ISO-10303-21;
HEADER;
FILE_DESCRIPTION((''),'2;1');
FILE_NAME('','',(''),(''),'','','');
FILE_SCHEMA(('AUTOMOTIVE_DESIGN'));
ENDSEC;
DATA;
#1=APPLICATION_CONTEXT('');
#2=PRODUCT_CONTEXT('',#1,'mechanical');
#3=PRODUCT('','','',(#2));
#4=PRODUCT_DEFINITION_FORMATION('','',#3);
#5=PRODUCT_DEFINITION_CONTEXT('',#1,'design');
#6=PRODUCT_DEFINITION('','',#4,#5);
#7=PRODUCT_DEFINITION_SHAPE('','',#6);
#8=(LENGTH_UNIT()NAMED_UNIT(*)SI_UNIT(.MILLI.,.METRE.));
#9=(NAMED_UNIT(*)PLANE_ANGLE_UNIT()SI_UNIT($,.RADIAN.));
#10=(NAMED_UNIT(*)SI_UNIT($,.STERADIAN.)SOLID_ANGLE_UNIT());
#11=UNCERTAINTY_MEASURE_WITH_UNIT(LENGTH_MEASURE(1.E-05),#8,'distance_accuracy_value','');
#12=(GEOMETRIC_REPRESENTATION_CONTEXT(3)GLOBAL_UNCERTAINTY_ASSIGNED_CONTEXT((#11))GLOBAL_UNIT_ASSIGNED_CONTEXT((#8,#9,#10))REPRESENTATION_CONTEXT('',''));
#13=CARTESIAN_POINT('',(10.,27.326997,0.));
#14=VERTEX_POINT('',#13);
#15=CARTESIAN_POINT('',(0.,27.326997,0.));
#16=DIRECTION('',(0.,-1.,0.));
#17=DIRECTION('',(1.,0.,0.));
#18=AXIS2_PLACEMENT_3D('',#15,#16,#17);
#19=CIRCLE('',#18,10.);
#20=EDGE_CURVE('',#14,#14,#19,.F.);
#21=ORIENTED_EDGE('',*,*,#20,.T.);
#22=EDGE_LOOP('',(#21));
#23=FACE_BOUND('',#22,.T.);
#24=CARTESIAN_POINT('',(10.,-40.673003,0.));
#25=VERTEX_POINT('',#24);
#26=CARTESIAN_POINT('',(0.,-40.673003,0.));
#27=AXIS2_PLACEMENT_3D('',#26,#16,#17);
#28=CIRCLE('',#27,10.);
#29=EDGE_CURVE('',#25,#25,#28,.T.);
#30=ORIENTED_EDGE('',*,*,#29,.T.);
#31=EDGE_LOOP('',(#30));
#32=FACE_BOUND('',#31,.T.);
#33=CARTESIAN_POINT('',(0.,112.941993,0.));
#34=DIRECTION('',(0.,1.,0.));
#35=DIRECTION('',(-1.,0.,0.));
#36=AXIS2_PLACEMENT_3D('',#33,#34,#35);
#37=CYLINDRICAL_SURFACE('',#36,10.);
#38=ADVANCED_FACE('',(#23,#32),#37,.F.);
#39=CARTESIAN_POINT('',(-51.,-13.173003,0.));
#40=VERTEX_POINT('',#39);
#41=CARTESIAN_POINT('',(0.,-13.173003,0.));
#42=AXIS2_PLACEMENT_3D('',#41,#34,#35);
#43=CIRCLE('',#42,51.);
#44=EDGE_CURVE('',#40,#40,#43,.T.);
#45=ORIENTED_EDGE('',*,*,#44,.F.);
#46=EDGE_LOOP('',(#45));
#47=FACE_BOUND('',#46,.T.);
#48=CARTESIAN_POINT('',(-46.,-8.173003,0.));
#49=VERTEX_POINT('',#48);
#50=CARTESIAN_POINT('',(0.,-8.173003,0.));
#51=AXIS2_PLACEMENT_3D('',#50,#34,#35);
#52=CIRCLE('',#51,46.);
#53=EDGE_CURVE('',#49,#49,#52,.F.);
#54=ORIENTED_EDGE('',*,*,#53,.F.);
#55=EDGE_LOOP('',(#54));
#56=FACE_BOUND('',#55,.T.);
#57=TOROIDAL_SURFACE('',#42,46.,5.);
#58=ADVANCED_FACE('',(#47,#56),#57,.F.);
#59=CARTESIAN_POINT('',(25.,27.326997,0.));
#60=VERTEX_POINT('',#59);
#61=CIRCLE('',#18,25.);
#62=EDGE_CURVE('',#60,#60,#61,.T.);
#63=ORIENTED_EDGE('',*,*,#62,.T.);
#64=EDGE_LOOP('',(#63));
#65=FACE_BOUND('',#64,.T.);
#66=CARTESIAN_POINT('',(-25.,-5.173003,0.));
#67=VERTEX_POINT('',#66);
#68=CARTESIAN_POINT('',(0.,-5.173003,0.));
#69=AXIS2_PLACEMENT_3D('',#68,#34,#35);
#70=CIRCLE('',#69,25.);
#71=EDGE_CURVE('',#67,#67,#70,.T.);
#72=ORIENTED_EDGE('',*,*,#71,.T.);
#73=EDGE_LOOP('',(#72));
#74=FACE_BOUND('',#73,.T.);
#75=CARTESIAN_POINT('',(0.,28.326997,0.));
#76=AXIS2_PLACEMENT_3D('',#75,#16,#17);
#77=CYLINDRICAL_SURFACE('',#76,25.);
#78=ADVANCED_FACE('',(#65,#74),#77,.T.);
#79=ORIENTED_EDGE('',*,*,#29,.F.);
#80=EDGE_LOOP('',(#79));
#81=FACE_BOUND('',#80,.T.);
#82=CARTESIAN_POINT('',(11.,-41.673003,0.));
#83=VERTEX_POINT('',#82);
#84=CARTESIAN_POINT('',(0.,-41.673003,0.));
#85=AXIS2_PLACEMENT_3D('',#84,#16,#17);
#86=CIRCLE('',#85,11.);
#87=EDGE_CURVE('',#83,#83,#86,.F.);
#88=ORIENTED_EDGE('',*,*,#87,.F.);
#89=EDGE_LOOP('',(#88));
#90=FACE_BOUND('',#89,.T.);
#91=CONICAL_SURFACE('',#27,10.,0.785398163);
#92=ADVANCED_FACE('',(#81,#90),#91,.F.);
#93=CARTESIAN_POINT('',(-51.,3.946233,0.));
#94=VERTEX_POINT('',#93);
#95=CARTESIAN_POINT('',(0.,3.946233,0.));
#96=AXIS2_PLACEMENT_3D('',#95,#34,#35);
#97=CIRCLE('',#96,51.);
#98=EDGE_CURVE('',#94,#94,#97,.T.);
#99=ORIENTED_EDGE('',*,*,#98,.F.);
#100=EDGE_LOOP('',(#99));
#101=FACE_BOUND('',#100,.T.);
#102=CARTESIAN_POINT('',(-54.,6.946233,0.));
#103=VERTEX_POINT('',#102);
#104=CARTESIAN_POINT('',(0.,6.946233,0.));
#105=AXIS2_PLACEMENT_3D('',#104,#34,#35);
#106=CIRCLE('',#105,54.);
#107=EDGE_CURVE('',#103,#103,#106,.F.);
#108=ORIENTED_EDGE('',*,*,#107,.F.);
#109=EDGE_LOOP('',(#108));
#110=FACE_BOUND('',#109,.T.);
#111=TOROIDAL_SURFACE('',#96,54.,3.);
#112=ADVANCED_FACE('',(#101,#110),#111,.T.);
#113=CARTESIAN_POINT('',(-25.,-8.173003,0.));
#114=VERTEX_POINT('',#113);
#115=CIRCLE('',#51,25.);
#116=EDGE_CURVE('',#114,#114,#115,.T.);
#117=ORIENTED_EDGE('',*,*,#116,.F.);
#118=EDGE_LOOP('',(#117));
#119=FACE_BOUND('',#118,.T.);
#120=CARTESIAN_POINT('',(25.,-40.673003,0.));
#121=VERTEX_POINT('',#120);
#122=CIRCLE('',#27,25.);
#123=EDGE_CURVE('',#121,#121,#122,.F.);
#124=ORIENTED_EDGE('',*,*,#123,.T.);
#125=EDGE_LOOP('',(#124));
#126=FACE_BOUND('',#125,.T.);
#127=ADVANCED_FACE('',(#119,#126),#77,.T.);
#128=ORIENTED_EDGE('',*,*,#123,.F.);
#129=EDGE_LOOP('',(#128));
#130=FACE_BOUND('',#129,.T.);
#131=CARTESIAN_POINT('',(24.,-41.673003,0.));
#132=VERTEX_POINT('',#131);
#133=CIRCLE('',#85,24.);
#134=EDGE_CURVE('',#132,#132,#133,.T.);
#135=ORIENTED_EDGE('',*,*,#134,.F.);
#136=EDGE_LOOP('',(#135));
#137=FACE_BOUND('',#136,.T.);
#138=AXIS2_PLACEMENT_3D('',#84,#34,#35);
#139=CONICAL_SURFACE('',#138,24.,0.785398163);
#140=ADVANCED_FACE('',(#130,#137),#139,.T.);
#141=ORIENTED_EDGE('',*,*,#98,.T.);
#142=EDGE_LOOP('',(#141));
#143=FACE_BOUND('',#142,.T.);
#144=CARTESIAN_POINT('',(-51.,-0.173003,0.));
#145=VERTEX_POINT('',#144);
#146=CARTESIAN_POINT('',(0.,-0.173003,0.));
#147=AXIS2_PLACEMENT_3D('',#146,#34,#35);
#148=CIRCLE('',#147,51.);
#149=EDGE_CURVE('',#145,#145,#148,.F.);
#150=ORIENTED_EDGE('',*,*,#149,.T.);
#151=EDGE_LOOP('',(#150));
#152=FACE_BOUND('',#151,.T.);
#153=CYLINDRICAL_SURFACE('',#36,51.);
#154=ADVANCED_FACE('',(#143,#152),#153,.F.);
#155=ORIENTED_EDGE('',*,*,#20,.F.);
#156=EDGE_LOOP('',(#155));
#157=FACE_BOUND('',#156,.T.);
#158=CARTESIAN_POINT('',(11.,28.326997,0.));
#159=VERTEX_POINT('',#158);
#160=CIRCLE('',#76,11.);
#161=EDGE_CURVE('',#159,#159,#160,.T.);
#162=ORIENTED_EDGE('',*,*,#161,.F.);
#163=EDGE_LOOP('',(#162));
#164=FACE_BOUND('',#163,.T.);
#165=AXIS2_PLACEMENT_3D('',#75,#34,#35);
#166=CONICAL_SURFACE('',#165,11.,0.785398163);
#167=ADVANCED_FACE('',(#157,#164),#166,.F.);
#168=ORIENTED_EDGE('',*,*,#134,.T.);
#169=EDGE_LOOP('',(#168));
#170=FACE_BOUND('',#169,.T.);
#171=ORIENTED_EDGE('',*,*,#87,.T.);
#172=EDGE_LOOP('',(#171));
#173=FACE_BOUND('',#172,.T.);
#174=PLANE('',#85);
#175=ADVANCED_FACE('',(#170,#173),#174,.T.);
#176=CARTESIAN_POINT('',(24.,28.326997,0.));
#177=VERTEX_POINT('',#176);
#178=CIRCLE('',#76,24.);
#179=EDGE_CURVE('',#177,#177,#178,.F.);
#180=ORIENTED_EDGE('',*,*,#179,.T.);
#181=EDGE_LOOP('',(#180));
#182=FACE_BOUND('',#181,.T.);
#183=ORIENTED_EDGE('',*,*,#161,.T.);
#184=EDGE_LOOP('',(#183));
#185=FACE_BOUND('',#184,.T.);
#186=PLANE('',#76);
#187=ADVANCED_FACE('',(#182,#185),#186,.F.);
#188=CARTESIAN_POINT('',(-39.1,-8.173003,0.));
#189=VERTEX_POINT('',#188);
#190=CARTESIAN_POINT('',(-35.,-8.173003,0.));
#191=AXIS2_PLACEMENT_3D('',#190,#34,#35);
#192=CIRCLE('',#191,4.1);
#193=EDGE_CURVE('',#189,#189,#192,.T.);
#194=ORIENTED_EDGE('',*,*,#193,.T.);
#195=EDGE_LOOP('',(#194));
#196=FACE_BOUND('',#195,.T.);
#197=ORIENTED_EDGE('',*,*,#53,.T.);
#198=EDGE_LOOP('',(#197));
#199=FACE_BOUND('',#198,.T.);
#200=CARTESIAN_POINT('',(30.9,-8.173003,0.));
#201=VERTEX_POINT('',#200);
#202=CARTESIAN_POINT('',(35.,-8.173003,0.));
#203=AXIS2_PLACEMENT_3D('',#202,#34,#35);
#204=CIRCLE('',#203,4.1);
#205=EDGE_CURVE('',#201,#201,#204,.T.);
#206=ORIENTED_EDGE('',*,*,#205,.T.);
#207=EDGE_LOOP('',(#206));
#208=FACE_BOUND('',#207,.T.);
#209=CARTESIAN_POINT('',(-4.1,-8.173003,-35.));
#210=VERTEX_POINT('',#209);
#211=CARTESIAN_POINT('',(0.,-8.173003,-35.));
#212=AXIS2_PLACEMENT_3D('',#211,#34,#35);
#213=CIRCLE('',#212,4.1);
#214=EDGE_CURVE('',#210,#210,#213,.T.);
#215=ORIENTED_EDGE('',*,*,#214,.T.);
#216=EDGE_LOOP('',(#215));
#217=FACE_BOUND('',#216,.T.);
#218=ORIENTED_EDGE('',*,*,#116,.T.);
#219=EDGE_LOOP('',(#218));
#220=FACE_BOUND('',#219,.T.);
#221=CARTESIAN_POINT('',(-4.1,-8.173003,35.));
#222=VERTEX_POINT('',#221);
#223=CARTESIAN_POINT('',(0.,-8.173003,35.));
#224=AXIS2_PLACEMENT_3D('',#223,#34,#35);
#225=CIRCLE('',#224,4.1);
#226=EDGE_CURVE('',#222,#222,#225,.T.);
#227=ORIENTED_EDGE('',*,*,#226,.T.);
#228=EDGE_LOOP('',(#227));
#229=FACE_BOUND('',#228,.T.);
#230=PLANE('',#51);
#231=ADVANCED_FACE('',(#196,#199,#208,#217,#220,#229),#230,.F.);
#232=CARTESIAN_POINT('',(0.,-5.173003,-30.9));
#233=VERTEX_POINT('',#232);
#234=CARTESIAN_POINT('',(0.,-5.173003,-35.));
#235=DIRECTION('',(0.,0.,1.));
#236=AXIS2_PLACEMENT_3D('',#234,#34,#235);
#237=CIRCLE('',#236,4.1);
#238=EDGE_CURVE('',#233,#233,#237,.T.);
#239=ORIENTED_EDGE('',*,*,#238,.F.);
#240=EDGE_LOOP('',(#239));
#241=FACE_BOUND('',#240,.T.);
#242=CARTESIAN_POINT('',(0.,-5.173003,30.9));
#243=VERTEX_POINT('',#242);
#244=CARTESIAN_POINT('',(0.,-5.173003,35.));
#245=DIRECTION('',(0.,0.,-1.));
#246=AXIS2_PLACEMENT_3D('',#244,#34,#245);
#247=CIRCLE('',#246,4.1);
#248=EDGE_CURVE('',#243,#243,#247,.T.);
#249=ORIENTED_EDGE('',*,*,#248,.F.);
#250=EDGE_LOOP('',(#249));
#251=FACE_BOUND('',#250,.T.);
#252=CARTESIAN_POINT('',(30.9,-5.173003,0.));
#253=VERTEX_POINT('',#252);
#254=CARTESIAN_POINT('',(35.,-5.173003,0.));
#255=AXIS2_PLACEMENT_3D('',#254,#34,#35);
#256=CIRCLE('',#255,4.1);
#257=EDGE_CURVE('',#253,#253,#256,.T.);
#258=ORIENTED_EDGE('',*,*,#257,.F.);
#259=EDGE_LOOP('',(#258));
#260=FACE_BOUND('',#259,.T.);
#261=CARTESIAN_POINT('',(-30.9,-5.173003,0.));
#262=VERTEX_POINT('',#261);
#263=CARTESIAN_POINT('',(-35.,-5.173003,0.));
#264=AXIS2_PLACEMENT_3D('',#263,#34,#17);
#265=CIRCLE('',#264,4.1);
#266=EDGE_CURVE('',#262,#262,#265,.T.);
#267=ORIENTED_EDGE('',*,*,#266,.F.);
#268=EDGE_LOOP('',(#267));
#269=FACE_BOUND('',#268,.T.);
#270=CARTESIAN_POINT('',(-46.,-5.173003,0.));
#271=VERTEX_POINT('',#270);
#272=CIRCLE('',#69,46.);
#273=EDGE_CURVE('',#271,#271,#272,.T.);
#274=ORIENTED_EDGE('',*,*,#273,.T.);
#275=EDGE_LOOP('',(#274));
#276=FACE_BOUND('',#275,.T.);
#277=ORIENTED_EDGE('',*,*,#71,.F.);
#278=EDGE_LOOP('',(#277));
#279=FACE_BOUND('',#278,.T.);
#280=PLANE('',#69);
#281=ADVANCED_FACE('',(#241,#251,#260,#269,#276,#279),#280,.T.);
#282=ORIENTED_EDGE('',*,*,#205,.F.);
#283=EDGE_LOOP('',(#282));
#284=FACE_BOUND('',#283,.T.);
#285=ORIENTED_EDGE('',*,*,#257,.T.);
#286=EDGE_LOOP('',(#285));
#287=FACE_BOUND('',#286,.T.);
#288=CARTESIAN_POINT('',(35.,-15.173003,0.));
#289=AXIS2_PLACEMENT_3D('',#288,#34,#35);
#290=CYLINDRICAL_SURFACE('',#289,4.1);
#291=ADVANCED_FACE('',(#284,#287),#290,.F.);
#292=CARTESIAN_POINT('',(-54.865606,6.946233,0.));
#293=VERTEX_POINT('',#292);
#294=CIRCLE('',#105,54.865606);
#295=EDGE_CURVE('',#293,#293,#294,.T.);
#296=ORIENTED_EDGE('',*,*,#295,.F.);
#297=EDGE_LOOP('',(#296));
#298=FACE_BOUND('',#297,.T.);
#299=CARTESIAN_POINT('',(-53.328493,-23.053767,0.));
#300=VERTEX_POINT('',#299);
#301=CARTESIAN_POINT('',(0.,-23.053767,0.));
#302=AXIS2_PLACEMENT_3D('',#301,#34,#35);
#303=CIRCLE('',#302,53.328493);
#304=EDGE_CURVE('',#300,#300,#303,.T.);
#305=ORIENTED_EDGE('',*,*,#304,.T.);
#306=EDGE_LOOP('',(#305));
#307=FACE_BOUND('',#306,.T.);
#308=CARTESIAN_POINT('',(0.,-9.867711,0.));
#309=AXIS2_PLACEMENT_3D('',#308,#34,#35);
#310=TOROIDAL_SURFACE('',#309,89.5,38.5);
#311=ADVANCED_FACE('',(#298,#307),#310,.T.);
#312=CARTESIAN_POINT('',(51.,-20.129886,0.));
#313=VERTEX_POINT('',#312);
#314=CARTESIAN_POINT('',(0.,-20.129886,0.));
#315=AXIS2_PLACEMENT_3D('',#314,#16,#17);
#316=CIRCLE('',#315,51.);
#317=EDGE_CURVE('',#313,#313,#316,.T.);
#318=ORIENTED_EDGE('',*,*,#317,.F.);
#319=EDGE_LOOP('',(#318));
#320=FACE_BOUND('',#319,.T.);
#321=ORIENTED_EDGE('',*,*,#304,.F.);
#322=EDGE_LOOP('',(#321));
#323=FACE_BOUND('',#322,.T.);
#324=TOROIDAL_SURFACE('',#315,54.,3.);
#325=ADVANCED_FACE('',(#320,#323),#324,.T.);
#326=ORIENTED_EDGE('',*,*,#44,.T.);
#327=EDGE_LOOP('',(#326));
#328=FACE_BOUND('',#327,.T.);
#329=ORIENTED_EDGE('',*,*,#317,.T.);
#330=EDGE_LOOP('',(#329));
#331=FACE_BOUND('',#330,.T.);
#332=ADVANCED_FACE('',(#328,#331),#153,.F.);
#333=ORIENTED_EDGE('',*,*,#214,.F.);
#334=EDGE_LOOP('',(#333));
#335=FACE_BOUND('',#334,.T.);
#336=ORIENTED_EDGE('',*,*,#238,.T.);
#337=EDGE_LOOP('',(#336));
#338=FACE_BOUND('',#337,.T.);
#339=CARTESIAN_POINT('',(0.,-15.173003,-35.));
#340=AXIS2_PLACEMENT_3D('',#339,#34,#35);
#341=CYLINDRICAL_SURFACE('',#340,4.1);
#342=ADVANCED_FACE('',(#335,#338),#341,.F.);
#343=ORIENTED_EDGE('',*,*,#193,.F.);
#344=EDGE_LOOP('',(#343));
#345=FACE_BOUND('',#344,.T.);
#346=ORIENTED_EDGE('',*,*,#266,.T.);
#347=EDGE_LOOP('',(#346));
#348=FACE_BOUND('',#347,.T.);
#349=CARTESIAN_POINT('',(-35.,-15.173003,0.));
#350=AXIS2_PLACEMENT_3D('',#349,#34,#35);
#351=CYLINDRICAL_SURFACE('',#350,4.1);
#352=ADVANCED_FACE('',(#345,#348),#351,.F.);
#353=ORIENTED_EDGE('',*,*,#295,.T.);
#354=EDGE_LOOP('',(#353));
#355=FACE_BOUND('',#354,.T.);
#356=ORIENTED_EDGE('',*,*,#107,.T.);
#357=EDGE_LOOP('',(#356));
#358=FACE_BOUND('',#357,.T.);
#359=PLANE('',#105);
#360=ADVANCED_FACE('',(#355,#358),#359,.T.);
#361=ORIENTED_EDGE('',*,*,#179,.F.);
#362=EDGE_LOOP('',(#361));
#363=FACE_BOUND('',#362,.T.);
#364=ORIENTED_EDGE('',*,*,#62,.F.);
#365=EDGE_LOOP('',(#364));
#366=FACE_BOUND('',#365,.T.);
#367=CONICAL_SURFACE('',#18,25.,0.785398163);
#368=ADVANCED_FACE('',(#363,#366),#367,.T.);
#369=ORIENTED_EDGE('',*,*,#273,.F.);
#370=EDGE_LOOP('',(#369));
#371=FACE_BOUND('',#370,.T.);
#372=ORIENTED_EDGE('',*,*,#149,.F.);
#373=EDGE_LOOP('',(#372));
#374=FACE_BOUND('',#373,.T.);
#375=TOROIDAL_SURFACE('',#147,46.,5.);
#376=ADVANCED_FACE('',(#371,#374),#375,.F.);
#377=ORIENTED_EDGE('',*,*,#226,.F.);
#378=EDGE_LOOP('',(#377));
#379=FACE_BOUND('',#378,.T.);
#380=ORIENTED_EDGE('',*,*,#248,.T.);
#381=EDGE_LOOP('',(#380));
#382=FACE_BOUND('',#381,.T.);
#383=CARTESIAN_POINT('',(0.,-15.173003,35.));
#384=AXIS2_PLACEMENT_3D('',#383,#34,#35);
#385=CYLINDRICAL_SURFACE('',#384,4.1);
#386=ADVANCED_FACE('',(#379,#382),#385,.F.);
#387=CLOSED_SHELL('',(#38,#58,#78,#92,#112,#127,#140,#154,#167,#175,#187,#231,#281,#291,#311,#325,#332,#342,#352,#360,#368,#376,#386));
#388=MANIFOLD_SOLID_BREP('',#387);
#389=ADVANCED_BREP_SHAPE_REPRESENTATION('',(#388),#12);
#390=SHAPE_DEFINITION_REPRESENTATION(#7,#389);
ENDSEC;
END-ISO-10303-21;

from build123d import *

# Parameters (mm, degrees)
SKETCH_1_R               = 38.5
SKETCH_1_W               = 10
SKETCH_1_H               = 30
SKETCH_1_W_2             = 41
SKETCH_1_H_2             = 3
FILLET_1_R               = 3
FILLET_2_R               = 5
EXTRUDE_1_DEPTH          = 35
EXTRUDE_1_DEPTH_BACK     = 35
SKETCH_3_R               = 25
SKETCH_3_R_2             = 10
CHAMFER_1_SIZE           = 1
SKETCH_4_R               = 4.1
CUT_EXTRUDE_1_DEPTH      = 10
PATTERN_CIRCULAR_1_COUNT = 4


with BuildPart() as part:
    # 草图1 → 旋转1 (revolve)
    with BuildSketch(Plane.XY, mode=Mode.PRIVATE) as revolve_1_sk:
        with Locations((89.5, -9.867711256)):
            Circle(SKETCH_1_R)
        with Locations((56, -8.053766518)):
            Rectangle(SKETCH_1_W, SKETCH_1_H)
        with Locations((30.5, -6.673002614)):
            Rectangle(SKETCH_1_W_2, SKETCH_1_H_2)
    revolve(revolve_1_sk.sketch.rotate(Axis((0, 112.941993014, 0), (0, -1, 0)), 180), axis=Axis((0, 112.941993014, 0), (0, -1, 0)))

    # 圆角1
    # the kernel refuses this fillet: 3 mm, written as the material it takes off along each edge
    with BuildSketch(Plane(origin=(0, -23.053766518, 0), x_dir=(-1, 0, 0), z_dir=(0, 0, 1))) as fillet_1_piece_1:
        with BuildLine():
            CenterArc((54, -2.923880611), FILLET_1_R, 102.934428201, 77.065571799)
            Line((51, -2.923880611), (50.94, -2.923880611))
            Line((50.94, -2.923880611), (50.94, 0))
            Line((50.94, 0), (51, 0.06))
            ThreePointArc((51, 0.06), (52.164246307, 0.06), (53.315062466, 0.058477612))
            Line((53.315062466, 0.058477612), (53.328492613, 0))
        make_face()
    revolve(axis=Axis((0, -23.053766518, 0), (0, -1, 0)), mode=Mode.SUBTRACT)
    with BuildSketch(Plane(origin=(0, 6.946233482, 0), x_dir=(-1, 0, 0), z_dir=(0, 0, 1))) as fillet_1_piece_2:
        with BuildLine():
            CenterArc((51 + FILLET_1_R, FILLET_1_R), FILLET_1_R, 180, 90)
            Line((51, FILLET_1_R), (51 - FILLET_1_R * 0.02, FILLET_1_R))
            Line((51 - FILLET_1_R * 0.02, FILLET_1_R), (51 - FILLET_1_R * 0.02, -FILLET_1_R * 0.02))
            Line((51 - FILLET_1_R * 0.02, -FILLET_1_R * 0.02), (51 + FILLET_1_R, -FILLET_1_R * 0.02))
            Line((51 + FILLET_1_R, -FILLET_1_R * 0.02), (51 + FILLET_1_R, 0))
        make_face()
    revolve(axis=Axis((0, 6.946233482, 0), (0, -1, 0)), mode=Mode.SUBTRACT)

    # 圆角2
    fillet_2_edges = [part.edges().sort_by_distance(p)[0] for p in [
        (51, -8.173002614, 0),
        (51, -5.173002614, 0),
    ]]
    fillet(fillet_2_edges, radius=FILLET_2_R)

    # 草图3 → 凸台-拉伸1 (add, two sides: drawn at the far end of the back side and taken through both)
    with BuildSketch(Plane(origin=(0, -6.673002614, 0), x_dir=(-1, 0, 0), z_dir=(0, -1, 0)).offset(-EXTRUDE_1_DEPTH_BACK)):
        with Locations(Location((0, 0, 0), (0, 0, 180))):
            Circle(SKETCH_3_R)
        with Locations(Location((0, 0, 0), (0, 0, 180))):
            Circle(SKETCH_3_R_2, mode=Mode.SUBTRACT)
    extrude(amount=EXTRUDE_1_DEPTH + EXTRUDE_1_DEPTH_BACK)

    # 倒角1
    chamfer_1_edges = [part.edges().sort_by_distance(p)[0] for p in [
        (-10, -41.673002614, 0),
        (-25, 28.326997386, 0),
        (-10, 28.326997386, 0),
        (-25, -41.673002614, 0),
    ]]
    chamfer(chamfer_1_edges, length=CHAMFER_1_SIZE)

    # 草图4 → 切除-拉伸1 (cut)
    with BuildSketch(Plane(origin=(0, -5.173002614, 0), x_dir=(1, 0, 0), z_dir=(0, 1, 0))):
        with Locations(Location((35, 0, 0), (0, 0, 180))):
            Circle(SKETCH_4_R)
    cut_extrude_1 = extrude(amount=-CUT_EXTRUDE_1_DEPTH, mode=Mode.SUBTRACT)

    # 阵列(圆周)1: 切除-拉伸1 ×4 about axis
    pattern_circular_1_axis = Axis((0, 0, 0), (0, 1, 0))
    for i in range(1, PATTERN_CIRCULAR_1_COUNT):
        add(cut_extrude_1.rotate(pattern_circular_1_axis, i * 360 / PATTERN_CIRCULAR_1_COUNT), mode=Mode.SUBTRACT)


solid = part.part
